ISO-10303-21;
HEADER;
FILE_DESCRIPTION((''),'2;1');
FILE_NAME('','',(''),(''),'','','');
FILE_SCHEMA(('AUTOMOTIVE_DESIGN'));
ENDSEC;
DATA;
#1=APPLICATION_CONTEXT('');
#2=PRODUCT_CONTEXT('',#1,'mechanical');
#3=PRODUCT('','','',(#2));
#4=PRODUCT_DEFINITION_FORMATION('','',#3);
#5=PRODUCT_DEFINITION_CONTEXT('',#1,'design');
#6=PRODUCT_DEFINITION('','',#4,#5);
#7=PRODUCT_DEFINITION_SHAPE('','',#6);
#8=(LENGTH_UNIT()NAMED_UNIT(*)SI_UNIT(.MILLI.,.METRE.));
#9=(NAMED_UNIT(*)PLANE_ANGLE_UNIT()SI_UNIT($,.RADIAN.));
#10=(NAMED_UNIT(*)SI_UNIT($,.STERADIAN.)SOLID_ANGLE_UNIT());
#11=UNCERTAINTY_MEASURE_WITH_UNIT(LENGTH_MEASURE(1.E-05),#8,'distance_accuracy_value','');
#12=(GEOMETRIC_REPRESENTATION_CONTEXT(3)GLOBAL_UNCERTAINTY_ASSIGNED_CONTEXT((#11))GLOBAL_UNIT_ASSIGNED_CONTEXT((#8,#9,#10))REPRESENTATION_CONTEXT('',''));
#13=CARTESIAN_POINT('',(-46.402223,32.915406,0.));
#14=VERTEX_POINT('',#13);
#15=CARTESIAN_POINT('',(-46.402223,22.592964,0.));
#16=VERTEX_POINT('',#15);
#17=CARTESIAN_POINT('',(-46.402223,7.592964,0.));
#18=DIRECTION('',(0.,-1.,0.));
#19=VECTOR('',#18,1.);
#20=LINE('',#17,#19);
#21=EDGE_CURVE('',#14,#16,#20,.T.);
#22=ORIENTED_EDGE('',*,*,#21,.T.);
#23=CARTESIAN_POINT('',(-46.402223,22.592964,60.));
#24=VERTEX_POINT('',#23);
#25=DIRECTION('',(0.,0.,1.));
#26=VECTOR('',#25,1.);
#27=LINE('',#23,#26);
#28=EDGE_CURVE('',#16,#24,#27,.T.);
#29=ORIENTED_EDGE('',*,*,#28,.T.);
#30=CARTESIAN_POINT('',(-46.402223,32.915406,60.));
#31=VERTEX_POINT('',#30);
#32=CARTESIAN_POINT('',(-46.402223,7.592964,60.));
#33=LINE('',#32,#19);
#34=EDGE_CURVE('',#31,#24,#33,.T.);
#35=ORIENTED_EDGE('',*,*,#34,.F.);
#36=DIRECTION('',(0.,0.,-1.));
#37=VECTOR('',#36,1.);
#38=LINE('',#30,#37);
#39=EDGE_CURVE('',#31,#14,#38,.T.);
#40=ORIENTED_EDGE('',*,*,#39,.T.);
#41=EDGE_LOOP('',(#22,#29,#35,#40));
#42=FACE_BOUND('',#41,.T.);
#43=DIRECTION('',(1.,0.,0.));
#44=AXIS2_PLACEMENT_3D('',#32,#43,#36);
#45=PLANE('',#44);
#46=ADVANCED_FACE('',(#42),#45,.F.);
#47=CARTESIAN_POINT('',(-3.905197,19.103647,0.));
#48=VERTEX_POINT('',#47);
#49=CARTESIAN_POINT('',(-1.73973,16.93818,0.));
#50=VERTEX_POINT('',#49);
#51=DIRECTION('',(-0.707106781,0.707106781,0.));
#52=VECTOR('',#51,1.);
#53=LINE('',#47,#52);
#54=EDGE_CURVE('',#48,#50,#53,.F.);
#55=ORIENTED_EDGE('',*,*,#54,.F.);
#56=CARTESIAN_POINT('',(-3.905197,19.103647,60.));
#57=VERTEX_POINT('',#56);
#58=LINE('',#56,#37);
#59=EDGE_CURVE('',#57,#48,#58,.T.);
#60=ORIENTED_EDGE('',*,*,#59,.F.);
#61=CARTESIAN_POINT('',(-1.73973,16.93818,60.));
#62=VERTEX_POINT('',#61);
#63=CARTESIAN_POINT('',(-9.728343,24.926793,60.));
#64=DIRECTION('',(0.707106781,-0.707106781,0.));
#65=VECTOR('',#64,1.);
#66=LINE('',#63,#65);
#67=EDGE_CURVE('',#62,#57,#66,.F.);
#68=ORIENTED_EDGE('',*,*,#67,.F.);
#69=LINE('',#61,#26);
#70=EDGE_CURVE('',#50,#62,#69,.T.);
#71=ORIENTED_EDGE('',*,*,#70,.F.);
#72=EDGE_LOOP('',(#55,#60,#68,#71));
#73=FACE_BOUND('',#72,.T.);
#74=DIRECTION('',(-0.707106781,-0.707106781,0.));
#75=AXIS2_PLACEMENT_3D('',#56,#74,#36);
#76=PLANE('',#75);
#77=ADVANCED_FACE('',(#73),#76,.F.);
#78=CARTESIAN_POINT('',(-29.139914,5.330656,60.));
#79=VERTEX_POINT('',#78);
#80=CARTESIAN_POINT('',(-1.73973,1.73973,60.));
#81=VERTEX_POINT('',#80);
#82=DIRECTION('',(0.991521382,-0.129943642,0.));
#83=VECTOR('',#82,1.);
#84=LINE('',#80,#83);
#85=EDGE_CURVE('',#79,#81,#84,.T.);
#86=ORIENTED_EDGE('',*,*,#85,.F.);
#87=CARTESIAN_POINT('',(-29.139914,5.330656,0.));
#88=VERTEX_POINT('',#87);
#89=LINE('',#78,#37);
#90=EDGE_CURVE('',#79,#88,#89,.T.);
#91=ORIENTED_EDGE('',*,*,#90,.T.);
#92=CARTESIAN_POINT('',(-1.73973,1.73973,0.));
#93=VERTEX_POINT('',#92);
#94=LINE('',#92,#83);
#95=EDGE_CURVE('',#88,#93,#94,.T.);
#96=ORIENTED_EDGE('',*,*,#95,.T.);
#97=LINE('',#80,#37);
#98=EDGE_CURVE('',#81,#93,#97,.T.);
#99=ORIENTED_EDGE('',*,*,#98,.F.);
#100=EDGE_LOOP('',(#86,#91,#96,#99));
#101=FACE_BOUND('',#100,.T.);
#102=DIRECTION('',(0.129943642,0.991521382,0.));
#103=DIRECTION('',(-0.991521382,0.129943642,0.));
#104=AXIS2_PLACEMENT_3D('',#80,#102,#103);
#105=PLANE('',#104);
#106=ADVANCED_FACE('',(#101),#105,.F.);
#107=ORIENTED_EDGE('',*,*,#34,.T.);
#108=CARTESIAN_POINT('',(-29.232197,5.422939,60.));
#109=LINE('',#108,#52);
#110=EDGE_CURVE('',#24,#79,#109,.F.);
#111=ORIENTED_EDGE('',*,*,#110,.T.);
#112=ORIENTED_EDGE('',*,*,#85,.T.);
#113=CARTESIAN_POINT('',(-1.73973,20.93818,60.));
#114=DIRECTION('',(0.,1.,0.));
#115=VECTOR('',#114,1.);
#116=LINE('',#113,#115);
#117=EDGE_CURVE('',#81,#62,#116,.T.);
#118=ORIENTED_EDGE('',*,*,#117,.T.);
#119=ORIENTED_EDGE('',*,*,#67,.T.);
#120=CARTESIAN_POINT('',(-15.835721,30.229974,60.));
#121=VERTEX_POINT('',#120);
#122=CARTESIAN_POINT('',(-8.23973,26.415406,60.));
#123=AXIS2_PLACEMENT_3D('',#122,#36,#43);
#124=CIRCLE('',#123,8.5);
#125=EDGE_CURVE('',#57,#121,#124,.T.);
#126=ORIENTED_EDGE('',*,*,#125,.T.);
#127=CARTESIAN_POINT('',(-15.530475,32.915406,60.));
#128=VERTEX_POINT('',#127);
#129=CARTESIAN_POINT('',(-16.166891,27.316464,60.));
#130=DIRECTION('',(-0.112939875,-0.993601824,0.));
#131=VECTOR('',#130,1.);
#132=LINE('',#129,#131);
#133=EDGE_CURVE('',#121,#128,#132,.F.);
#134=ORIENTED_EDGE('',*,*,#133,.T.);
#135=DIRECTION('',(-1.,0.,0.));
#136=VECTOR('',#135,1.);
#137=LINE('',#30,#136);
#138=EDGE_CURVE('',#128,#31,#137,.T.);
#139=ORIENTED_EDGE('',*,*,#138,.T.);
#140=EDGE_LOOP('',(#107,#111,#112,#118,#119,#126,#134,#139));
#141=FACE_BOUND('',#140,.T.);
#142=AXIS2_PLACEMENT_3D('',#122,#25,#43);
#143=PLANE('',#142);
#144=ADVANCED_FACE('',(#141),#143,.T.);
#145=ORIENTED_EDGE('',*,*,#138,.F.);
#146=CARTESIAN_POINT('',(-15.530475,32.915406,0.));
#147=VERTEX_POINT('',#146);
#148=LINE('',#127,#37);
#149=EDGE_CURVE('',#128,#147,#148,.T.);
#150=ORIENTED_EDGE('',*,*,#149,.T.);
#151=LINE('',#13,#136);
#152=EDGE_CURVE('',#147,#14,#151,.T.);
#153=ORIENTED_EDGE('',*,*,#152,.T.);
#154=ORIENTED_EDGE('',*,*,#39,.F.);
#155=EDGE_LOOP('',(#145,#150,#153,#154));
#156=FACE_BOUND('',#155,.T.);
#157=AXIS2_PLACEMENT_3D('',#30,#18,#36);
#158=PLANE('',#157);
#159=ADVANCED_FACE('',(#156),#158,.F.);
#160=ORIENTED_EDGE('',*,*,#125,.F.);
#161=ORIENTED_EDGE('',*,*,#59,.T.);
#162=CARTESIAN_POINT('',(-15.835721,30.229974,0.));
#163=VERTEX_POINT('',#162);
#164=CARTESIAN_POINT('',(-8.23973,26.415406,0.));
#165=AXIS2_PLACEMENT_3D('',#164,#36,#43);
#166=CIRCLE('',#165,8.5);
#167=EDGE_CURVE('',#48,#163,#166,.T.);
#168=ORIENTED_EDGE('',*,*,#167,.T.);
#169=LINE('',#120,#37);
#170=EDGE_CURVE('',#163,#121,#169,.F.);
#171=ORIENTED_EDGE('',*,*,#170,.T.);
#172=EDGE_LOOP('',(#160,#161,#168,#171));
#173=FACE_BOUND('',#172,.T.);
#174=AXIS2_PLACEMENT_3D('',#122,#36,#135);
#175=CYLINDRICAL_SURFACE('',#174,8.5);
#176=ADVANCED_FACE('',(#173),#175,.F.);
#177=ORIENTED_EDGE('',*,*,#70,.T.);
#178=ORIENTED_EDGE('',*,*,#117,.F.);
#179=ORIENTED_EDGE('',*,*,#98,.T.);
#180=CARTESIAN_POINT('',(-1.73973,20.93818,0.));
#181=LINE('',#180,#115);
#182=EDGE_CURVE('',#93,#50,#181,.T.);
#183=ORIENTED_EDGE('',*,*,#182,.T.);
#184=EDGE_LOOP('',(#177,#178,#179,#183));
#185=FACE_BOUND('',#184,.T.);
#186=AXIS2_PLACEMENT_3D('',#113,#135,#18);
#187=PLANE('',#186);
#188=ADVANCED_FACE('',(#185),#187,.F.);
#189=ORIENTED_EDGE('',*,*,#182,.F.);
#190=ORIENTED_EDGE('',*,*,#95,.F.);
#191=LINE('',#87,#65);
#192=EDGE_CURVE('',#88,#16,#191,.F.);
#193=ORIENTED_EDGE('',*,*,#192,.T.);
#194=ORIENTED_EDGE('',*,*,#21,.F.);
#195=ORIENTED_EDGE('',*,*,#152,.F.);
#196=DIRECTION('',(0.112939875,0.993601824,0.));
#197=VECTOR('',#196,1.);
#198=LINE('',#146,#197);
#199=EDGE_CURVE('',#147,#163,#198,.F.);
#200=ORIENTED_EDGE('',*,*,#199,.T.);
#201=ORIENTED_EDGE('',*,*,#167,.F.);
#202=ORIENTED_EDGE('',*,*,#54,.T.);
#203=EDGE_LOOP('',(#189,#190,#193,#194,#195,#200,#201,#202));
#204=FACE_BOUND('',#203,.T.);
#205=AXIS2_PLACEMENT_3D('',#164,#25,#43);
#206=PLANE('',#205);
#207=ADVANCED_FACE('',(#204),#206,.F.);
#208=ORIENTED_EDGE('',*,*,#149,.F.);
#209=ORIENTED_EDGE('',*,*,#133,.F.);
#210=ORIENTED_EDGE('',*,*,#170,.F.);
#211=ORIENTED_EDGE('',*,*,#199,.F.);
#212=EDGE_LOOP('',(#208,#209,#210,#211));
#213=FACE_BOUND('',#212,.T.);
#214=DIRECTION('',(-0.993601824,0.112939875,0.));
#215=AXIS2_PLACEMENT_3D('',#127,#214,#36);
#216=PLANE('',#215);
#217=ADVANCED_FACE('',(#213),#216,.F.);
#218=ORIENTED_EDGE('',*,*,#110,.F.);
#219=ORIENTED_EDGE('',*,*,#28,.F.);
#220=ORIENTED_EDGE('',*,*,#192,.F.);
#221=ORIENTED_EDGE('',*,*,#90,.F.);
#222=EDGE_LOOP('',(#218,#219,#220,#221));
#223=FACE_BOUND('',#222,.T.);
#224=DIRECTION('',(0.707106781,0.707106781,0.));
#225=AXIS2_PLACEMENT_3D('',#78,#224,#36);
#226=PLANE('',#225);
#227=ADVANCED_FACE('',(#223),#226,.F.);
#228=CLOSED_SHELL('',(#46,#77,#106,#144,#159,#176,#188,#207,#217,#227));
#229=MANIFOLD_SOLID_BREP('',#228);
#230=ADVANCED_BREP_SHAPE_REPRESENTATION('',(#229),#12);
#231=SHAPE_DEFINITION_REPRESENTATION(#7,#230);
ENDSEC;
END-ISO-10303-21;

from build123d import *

# Parameters (mm, degrees)
BOSS_EXTRU_1_DEPTH = 60
CHANFREIN1_START   = -1
CHANFREIN1_DEPTH   = 62
CHANFREIN2_SIZE    = 15
CHANFREIN2_SIZE2   = 17.409920551


with BuildPart() as part:
    # Esquisse1 → Boss.-Extru.1 (new body)
    with BuildSketch(Plane.XY):
        with BuildLine():
            Line((-1.739730228, 1.739730228), (-46.4022226, 7.592964471))
            Line((-46.4022226, 7.592964471), (-46.4022226, 32.915406071))
            Line((-46.4022226, 32.915406071), (-13.716955803, 32.915406071))
            ThreePointArc((-13.716955803, 32.915406071), (-14.250137868, 20.404998431), (-1.739730228, 20.938180496))
            Line((-1.739730228, 20.938180496), (-1.739730228, 1.739730228))
        make_face()
    extrude(amount=BOSS_EXTRU_1_DEPTH)

    # Chanfrein1: read off the stored shape, not the designer's step
    # Chanfrein1 outline → Chanfrein1 (cut)
    with BuildSketch(Plane.XY.offset(CHANFREIN1_START)):
        with BuildLine():
            ThreePointArc((-1.739730228, 20.938180496), (-2.7453552, 19.929895832), (-3.905196789, 19.103647058))
            Line((-3.905196789, 19.103647058), (-1.739730228, 16.938180496))
            Line((-1.739730228, 16.938180496), (-1.739730228, 20.938180496))
        make_face()
        with BuildLine():
            Line((-15.530475388, 32.915406071), (-15.835720777, 30.229973881))
            ThreePointArc((-15.835720777, 30.229973881), (-14.912820327, 31.680372218), (-13.716955803, 32.915406071))
            Line((-13.716955803, 32.915406071), (-15.530475388, 32.915406071))
        make_face()
    extrude(amount=CHANFREIN1_DEPTH, mode=Mode.SUBTRACT)

    # Chanfrein2
    chanfrein2_edges = [part.edges().sort_by_distance(p)[0] for p in [
        (-46.4022226, 7.592964471, 30),
    ]]
    chanfrein2_side = [part.faces().sort_by_distance(p)[0] for p in [
        (-46.4022226, 20.254185271, 30),
    ]]
    chamfer(chanfrein2_edges, length=CHANFREIN2_SIZE, length2=CHANFREIN2_SIZE2, reference=chanfrein2_side[0])


solid = part.part
